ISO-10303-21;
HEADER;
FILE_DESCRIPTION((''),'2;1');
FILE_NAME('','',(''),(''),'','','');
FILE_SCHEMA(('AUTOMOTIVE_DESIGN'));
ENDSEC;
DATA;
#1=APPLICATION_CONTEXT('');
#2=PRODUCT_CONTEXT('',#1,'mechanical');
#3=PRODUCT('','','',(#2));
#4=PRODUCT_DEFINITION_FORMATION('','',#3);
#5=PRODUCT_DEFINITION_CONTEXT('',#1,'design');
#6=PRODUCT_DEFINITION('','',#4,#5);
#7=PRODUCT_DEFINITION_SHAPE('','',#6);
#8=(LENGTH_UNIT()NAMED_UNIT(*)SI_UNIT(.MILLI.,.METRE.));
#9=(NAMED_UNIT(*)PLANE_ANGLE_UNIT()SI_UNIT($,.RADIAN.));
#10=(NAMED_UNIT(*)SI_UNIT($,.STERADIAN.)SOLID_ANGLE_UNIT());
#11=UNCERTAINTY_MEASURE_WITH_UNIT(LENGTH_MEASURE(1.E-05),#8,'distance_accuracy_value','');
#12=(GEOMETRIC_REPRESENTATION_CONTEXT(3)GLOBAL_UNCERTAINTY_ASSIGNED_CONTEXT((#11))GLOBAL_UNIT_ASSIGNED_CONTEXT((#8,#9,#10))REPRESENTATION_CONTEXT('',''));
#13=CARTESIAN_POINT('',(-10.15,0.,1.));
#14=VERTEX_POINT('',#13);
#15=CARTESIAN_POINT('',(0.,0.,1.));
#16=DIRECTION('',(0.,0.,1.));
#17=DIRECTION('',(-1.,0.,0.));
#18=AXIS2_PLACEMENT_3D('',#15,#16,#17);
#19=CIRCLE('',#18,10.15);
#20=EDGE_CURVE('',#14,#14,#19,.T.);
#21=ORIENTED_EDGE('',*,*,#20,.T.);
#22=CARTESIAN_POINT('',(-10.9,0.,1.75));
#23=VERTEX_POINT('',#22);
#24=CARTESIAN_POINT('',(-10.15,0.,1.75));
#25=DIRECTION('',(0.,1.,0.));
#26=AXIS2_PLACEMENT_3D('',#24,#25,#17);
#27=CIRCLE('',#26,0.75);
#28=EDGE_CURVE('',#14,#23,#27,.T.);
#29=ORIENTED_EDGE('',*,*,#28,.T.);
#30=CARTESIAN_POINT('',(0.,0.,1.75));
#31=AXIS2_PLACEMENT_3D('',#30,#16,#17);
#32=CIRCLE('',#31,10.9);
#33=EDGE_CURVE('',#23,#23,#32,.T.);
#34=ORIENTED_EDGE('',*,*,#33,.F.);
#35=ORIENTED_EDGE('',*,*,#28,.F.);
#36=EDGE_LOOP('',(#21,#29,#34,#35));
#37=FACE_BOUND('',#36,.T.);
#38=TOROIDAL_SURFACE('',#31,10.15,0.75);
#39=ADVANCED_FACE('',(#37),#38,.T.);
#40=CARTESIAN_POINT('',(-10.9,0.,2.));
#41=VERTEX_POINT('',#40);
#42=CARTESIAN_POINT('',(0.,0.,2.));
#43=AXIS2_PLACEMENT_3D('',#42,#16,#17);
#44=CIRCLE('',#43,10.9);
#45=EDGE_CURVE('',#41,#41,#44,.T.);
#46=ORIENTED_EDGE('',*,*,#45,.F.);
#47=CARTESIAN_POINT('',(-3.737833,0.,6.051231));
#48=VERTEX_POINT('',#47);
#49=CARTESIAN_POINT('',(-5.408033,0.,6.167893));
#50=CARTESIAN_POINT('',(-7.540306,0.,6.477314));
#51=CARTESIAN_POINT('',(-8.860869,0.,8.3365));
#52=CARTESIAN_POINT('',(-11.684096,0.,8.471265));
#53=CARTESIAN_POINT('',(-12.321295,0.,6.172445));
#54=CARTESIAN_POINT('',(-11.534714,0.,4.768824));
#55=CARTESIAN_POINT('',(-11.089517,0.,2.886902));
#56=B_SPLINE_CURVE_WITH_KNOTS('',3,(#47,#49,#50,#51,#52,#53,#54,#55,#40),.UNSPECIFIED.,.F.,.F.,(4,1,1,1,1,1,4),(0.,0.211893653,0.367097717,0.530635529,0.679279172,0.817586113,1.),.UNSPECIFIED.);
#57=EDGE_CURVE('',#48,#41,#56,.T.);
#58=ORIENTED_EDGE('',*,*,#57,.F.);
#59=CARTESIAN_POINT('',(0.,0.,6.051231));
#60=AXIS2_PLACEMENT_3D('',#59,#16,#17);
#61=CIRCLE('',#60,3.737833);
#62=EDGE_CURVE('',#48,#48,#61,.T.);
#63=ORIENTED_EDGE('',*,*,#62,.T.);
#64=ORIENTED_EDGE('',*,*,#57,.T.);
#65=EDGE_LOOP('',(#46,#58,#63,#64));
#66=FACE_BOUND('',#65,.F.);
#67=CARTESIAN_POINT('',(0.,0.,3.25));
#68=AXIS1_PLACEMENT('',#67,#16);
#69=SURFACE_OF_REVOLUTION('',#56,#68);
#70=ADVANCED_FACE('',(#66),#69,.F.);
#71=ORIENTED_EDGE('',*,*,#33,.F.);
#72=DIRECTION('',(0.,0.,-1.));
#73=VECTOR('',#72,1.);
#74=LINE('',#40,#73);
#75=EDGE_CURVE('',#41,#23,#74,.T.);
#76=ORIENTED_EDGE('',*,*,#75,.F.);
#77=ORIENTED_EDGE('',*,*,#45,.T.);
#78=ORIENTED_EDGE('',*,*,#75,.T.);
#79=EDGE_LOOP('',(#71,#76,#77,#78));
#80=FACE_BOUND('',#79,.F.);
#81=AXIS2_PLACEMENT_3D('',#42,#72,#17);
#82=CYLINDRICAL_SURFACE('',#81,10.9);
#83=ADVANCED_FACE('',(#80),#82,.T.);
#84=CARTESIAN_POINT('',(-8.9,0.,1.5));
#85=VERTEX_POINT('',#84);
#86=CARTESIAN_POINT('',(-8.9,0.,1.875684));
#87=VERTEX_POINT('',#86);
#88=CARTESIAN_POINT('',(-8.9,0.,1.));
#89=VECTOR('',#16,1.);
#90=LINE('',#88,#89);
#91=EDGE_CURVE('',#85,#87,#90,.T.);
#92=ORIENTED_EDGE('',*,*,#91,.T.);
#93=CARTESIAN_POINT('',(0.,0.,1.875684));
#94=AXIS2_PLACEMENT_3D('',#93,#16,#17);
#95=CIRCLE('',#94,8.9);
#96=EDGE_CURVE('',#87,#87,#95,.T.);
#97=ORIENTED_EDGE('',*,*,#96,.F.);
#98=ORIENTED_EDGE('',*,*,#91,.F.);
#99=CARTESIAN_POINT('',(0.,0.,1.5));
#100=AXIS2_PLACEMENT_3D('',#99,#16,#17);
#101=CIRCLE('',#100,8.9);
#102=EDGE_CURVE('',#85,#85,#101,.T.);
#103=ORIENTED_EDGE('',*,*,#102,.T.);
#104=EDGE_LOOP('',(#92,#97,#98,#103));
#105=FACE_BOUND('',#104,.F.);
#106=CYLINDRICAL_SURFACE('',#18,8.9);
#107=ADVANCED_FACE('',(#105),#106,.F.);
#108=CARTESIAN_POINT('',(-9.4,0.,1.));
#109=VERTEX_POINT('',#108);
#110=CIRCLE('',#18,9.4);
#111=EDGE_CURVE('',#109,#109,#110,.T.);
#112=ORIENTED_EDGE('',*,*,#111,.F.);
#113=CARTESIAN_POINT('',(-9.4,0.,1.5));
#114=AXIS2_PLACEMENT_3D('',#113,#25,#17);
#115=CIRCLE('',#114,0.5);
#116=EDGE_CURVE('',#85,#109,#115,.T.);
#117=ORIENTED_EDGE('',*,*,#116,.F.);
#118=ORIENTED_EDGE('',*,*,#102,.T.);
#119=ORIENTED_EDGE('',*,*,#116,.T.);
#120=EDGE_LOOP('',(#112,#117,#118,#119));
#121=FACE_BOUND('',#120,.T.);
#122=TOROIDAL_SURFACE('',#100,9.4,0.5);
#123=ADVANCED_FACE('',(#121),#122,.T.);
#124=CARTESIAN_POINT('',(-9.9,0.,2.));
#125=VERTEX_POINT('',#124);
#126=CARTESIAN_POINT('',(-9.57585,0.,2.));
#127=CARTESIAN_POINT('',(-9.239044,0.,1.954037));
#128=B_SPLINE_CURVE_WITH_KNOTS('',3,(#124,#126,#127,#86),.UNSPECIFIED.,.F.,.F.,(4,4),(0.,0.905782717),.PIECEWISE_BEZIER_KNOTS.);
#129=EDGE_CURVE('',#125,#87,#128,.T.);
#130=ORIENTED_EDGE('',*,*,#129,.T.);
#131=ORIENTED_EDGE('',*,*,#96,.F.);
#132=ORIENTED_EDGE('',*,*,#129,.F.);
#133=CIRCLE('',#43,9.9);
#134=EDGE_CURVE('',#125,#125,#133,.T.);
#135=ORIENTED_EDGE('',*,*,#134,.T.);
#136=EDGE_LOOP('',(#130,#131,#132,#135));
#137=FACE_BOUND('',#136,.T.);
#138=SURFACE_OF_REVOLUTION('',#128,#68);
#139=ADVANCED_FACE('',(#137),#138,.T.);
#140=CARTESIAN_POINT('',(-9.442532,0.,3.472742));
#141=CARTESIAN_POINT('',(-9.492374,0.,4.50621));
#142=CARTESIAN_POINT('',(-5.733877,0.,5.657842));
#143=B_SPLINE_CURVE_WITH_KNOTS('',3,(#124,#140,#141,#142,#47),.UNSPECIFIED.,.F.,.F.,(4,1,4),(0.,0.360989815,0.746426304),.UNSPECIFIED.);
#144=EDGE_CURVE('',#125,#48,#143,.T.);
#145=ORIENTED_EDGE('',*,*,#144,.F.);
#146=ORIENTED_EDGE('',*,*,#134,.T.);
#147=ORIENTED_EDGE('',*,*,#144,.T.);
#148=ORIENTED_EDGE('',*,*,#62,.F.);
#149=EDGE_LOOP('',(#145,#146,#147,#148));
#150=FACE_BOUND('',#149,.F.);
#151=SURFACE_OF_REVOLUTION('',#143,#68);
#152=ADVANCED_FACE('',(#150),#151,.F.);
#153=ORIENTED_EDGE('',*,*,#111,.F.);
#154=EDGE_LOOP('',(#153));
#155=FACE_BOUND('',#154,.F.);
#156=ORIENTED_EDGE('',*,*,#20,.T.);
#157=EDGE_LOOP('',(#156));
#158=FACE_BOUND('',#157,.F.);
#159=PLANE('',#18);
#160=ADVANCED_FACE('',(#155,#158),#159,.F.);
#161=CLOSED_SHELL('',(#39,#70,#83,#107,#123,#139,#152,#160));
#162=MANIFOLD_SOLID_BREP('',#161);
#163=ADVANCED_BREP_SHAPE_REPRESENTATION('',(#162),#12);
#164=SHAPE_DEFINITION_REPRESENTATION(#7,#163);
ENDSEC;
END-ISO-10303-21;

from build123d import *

# Parameters (mm, degrees)
F3_R = 0.5
F4_R = 0.75


with BuildPart() as f1:
    # F0 (on Front) → F1 (revolve)
    with BuildSketch(Plane.XZ):
        with BuildLine():
            add(Edge.make_bspline(
                [(-9.9, 2), (-9.5758501784, 2), (-9.2390440685, 1.9540368163), (-8.9, 1.8756836241)],
                knots=[0, 0, 0, 0, 0.9057827175, 0.9057827175, 0.9057827175, 0.9057827175], degree=3))
            add(Edge.make_bspline(
                [(-9.9, 2), (-9.4425315337, 3.4727421793), (-9.4923738418, 4.5062098982), (-5.7338769398, 5.657842442), (-3.7378328669, 6.0512309775)],
                knots=[0, 0, 0, 0, 0.3609898147, 0.7464263039, 0.7464263039, 0.7464263039, 0.7464263039], degree=3))
            add(Edge.make_bspline(
                [(-3.7378328669, 6.0512309775), (-5.4080331592, 6.1678928498), (-7.540306393, 6.4773144128), (-8.8608693051, 8.3364996593), (-11.6840963626, 8.4712647723), (-12.321294733, 6.1724447902), (-11.5347135554, 4.7688239601), (-11.0895165965, 2.8869020172), (-10.9, 2)],
                knots=[0, 0, 0, 0, 0.2118936526, 0.3670977167, 0.5306355286, 0.6792791718, 0.8175861129, 1, 1, 1, 1], degree=3))
            Line((-10.9, 2), (-10.9, 1))
            Line((-10.9, 1), (-8.9, 1))
            Line((-8.9, 1), (-8.9, 1.8756836241))
        make_face()
    revolve(axis=Axis((0, 0, 3.25), (0, 0, 1)))

    # F3
    f3_edges = [f1.edges().sort_by_distance(p)[0] for p in [
        (8.9, 0, 1),
    ]]
    fillet(f3_edges, radius=F3_R)

    # F4
    f4_edges = [f1.edges().sort_by_distance(p)[0] for p in [
        (10.9, 0, 1),
    ]]
    fillet(f4_edges, radius=F4_R)


solid = f1.part
